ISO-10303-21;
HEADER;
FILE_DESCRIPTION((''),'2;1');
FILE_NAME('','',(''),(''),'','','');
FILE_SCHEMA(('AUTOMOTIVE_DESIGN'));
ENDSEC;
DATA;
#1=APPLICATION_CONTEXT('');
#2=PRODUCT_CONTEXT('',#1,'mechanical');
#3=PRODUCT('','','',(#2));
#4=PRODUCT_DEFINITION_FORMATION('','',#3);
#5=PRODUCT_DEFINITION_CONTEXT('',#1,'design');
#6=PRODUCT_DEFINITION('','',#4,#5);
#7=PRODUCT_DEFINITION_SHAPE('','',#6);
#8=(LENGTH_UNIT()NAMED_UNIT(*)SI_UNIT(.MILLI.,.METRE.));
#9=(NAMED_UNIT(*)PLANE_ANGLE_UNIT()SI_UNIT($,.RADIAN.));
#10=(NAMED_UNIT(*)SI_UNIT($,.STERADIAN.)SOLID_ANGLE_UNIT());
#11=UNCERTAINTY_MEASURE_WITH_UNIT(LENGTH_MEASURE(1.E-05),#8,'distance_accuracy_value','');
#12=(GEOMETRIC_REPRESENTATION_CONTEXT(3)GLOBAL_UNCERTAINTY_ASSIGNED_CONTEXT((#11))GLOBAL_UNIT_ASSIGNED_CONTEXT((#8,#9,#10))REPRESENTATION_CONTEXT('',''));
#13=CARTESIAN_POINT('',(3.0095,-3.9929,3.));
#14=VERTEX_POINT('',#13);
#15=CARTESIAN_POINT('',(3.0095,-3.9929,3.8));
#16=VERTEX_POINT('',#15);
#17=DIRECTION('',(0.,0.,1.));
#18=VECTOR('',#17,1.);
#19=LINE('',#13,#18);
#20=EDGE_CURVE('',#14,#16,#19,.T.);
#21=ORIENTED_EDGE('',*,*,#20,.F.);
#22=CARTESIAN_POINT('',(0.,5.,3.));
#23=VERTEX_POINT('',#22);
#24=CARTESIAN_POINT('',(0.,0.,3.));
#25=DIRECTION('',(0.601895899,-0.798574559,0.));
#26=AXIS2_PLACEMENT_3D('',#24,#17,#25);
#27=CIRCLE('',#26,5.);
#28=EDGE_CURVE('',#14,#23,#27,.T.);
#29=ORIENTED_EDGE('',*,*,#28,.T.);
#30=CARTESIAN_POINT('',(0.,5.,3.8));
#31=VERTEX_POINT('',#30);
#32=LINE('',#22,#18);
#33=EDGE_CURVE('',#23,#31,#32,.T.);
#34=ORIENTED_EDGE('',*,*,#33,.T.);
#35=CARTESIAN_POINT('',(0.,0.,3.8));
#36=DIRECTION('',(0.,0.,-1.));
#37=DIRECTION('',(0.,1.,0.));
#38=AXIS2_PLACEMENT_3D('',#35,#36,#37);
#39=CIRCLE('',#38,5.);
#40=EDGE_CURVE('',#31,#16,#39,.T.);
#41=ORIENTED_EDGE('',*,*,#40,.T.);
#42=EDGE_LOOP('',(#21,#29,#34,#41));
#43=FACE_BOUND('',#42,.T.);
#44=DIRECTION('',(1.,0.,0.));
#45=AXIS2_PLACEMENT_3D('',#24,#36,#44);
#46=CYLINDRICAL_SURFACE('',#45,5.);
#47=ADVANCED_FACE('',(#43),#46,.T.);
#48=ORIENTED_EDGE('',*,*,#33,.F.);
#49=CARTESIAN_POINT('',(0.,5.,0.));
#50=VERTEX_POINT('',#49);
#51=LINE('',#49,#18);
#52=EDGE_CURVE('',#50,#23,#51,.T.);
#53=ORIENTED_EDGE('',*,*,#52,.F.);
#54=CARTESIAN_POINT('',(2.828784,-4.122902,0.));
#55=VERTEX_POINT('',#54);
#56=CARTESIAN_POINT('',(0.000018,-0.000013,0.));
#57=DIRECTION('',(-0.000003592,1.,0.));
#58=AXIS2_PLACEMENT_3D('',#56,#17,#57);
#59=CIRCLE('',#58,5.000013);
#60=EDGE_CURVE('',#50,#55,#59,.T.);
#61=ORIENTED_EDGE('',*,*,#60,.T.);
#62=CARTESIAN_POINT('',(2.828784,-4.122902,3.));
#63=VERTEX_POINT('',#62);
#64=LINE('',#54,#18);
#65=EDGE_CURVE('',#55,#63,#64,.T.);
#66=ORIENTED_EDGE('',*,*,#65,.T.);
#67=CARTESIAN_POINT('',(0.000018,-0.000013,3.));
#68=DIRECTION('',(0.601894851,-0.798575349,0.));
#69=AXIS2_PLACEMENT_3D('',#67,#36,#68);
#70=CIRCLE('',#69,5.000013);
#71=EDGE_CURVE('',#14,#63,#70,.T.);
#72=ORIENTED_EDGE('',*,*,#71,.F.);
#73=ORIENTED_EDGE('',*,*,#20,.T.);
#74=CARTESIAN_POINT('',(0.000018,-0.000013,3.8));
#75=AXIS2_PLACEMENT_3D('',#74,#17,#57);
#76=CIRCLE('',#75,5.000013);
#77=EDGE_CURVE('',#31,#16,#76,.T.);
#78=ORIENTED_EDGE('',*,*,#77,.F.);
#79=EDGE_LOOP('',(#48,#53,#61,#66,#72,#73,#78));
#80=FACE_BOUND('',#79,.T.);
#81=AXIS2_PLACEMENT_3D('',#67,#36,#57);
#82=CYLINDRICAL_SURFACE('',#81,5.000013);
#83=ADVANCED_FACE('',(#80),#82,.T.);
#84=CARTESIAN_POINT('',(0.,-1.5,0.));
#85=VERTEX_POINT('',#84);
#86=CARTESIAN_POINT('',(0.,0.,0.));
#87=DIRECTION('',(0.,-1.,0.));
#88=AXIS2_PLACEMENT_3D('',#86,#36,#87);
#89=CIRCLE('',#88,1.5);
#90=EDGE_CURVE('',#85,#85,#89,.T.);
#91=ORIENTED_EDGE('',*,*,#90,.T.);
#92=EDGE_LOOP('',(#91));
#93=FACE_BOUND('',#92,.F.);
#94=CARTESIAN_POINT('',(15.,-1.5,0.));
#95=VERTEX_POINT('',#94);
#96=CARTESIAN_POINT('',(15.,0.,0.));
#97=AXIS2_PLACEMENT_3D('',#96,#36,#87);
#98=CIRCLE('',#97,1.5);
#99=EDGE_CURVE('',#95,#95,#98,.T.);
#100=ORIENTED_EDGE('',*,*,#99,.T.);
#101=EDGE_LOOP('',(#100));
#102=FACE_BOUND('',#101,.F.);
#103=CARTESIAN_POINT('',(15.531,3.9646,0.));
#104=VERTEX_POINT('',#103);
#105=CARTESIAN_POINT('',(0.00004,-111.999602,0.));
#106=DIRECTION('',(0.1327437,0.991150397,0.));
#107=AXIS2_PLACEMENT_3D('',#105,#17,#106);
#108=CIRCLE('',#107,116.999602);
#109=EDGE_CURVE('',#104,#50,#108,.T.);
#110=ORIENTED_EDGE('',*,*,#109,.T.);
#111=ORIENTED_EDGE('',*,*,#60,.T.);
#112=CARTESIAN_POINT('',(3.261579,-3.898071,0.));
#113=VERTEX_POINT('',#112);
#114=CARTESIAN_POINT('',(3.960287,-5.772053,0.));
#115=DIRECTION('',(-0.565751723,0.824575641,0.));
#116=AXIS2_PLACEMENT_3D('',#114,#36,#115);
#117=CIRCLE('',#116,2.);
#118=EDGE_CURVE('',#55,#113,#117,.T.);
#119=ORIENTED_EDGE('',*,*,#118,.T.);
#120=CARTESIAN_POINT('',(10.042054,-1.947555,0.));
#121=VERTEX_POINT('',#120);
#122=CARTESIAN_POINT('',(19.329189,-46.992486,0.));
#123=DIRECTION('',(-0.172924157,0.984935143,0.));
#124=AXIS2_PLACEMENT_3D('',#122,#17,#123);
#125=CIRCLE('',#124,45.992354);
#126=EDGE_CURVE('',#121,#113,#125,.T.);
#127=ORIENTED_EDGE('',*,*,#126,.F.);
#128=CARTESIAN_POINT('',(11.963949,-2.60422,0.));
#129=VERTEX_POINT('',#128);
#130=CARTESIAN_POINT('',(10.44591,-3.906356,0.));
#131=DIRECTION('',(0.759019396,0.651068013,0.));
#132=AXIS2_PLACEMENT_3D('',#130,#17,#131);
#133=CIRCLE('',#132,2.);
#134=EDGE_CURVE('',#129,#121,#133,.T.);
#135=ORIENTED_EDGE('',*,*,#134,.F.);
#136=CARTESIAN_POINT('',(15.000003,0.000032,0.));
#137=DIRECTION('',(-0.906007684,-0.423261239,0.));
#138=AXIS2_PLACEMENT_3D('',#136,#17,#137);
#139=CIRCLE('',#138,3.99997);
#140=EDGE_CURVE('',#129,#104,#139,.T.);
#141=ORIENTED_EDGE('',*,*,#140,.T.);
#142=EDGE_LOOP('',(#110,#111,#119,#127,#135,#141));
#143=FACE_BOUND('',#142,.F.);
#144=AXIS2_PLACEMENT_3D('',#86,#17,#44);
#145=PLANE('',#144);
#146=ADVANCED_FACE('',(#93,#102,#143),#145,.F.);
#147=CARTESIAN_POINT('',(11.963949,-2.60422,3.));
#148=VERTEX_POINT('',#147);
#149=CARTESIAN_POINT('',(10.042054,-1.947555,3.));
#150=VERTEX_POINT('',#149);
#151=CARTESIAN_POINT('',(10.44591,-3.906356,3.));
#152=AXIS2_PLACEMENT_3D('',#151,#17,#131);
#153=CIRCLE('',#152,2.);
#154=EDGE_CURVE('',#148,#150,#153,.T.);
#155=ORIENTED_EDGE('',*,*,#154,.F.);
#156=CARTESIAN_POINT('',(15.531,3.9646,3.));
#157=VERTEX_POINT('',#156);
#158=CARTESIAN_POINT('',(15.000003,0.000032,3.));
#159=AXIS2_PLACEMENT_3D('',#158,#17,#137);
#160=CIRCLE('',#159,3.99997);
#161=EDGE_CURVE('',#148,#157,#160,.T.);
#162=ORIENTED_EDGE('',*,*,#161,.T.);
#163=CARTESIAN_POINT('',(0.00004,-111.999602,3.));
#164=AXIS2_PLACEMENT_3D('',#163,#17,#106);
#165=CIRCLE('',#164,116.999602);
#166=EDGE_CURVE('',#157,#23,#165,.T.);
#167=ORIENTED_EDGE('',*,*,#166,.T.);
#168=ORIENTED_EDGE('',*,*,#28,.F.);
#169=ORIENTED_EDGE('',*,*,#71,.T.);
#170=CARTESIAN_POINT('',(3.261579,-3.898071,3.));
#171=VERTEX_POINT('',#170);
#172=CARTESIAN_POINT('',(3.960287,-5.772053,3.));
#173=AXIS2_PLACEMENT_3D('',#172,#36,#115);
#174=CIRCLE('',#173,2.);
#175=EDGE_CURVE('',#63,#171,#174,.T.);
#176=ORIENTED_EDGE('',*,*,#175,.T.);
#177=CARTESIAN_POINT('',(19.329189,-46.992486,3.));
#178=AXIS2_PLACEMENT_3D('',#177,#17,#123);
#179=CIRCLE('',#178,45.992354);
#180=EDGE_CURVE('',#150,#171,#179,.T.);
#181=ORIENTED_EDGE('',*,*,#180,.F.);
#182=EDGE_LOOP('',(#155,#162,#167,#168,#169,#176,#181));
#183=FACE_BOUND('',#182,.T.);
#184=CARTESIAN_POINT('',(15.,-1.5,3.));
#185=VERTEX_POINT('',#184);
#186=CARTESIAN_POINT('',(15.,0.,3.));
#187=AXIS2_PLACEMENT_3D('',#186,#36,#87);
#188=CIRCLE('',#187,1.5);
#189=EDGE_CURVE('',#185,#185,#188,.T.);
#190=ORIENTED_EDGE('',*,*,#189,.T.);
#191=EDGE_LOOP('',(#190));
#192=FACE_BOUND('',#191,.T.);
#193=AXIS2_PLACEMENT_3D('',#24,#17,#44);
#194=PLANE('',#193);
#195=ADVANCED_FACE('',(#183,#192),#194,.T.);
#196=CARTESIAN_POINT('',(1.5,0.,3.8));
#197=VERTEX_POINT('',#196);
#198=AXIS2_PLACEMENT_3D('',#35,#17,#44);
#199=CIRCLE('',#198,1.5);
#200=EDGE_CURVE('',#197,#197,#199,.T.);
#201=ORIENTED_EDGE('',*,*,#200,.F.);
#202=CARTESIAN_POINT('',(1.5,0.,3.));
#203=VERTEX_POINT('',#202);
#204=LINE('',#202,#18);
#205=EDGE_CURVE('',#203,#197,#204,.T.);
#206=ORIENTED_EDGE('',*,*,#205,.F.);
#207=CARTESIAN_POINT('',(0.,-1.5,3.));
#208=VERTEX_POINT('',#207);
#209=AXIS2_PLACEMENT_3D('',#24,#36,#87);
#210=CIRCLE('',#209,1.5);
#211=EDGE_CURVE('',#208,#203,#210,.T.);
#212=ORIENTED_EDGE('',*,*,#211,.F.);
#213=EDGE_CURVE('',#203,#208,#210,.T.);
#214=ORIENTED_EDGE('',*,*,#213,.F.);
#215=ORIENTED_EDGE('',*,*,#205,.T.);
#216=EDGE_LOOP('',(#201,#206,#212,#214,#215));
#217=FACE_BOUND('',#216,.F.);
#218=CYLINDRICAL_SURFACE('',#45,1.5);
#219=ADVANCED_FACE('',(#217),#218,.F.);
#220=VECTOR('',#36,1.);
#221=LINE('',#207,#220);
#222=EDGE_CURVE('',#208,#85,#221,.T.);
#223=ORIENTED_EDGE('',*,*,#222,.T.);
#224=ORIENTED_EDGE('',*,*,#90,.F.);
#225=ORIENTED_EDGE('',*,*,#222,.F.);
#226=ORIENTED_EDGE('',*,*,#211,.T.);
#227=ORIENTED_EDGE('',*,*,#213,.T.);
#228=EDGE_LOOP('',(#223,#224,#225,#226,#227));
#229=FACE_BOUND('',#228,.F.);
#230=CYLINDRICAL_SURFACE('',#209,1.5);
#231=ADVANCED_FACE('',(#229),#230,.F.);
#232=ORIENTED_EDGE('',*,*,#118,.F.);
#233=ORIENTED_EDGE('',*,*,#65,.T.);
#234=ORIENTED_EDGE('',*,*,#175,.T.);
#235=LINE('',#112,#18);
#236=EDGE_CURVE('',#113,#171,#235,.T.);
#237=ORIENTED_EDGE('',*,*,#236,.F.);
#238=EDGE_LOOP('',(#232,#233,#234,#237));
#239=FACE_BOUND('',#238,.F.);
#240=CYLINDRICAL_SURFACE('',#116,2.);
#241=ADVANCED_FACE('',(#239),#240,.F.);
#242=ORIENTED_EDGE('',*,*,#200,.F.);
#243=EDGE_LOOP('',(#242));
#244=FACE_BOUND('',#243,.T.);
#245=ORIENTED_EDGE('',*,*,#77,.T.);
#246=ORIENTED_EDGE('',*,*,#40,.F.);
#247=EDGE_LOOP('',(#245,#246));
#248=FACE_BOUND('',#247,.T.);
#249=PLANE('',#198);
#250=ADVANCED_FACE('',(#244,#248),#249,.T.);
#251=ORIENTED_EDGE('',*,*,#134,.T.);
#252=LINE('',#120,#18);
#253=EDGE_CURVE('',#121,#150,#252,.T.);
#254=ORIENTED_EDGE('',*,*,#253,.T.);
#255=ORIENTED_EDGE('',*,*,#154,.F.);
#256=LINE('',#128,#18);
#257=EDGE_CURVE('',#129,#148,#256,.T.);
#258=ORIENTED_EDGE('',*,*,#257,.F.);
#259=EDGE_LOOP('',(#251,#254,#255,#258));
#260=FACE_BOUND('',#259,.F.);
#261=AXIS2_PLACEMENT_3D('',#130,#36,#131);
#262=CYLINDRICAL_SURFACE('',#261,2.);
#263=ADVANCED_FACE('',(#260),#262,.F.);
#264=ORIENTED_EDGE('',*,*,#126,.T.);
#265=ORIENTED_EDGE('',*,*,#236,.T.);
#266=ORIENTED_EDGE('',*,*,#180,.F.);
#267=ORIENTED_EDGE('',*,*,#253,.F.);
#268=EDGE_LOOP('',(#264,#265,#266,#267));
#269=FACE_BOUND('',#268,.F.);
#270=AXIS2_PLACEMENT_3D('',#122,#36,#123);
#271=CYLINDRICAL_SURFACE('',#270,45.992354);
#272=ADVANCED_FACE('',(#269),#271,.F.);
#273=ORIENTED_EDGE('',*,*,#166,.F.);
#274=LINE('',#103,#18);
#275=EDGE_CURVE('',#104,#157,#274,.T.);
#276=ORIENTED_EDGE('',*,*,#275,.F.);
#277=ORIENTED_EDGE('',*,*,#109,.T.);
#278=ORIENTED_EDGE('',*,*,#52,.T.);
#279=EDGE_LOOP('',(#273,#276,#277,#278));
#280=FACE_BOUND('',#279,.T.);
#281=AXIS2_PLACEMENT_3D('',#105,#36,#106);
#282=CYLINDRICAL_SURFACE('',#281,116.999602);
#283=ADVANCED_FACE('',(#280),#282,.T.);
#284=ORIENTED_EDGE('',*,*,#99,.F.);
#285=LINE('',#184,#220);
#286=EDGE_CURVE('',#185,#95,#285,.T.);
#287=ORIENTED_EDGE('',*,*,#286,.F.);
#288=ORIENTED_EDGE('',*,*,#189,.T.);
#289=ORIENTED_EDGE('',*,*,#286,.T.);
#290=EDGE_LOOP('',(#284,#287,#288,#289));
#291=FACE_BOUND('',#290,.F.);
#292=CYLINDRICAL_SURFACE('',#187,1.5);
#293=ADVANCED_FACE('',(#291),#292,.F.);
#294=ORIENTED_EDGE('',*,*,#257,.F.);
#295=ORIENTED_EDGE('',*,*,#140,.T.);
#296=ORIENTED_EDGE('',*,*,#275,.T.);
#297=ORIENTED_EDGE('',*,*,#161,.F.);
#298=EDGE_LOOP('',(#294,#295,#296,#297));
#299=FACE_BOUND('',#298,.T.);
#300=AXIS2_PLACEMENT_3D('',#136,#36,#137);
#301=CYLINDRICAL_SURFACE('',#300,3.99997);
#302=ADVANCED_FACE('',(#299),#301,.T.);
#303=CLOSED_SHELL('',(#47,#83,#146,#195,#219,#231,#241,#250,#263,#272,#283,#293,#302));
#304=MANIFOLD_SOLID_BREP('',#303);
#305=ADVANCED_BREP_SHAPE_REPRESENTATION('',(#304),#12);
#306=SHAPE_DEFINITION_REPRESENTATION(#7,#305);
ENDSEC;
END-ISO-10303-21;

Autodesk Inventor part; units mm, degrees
ref_plane "YZ Plane" through (0, 0, 0) normal (1, 0, 0) x (0, 1, 0)
ref_plane "XZ Plane" through (0, 0, 0) normal (0, 1, 0) x (-1, 0, 0)
ref_plane "XY Plane" through (0, 0, 0) normal (0, 0, 1) x (1, 0, 0)
sketch "Skizze1" plane through (0, 0, 0) normal (0, 0, 1) x (1, 0, 0)
  line L0 (0, 0) -> (15, 0) construction
  arc A0 (0, 5) -> (3.0095, -3.9929) centre (0, 0) ccw
  arc A1 (11.376, -1.693) -> (15.531, 3.9646) centre (15, 0) ccw
  arc A2 (15.531, 3.9646) -> (0, 5) centre (0, -112) ccw
  arc A3 (11.376, -1.693) -> (3.0095, -3.9929) centre (19.3309, -47.0001) ccw
  line L1 (0, -0.0371) -> (0, 5) construction
  dimension "d0" = 15
  dimension "d1" = 5
  dimension "d2" = 1
  dimension "d3" = 4
ref_plane "Arbeitsebene1" through (0, -0.0371, 0) normal (0, 0, -1) x (0, 1, 0)
extrude "Extrusion1" add sketch "Skizze1" along normal blind 3
sketch "Skizze2" plane through (0, 0, 3) normal (0, 0, 1) x (1, 0, 0)
  arc A0 (0, 5) -> (3.0095, -3.9929) centre (0, 0) ccw projected
  arc A1 (11.376, -1.693) -> (15.531, 3.9646) centre (15, 0) ccw projected
hole "Bohrung1" at (0, 0, 3) at (15, 0, 3) direction (0, 0, -1) diameter 3 end through all
sketch "Skizze4" plane through (0, 0, 3) normal (0, 0, 1) x (1, 0, 0)
  arc A0 (0, 5) -> (3.0095, -3.9929) centre (0, 0) ccw projected
  circle A1 centre (0, 0) radius 5
  circle A2 centre (0, 0) radius 1.5 projected
extrude "Extrusion2" add sketch "Skizze4" along normal blind 0.8
fillet "Rundung2" radius 2 2 edges at (3.0095, -3.9929, 1.5) (11.376, -1.693, 1.5)
sketch "Skizze3" plane through (0, 0, 0) normal (0, 0, -1) x (-1, 0, 0)
  circle A0 centre (-4.319, 1.2636) radius 1.5
  arc A1 (-3.0095, -3.9929) -> (0, 5) centre (0, 0) ccw projected
  line L0 (0, 0) -> (-4.319, 1.2636)
  circle A2 centre (0, 0) radius 4.5 construction
  dimension "d25" = 9
equation "\"d0\" = Hebel_basis_2"
equation "\"d3\" = bearingWall"
equation "\"d6\" = bearingHole"
equation "\"FingerLaenge_B\" = 25"
equation "\"Hebel_B\" = 25"
equation "\"FingerWall\" = 3"
equation "\"Finger_diameter\" = 8"
equation "\"Finger_width\" = 22"
equation "\"Hebel_basis_2\" = 15"
equation "\"Join_width\" = 3"
equation "\"bearingHole\" = 3"
equation "\"bearingWall\" = 4"
equation "\"support_D\" = 0.25"
properties part number "Hebel_Basis 2"
